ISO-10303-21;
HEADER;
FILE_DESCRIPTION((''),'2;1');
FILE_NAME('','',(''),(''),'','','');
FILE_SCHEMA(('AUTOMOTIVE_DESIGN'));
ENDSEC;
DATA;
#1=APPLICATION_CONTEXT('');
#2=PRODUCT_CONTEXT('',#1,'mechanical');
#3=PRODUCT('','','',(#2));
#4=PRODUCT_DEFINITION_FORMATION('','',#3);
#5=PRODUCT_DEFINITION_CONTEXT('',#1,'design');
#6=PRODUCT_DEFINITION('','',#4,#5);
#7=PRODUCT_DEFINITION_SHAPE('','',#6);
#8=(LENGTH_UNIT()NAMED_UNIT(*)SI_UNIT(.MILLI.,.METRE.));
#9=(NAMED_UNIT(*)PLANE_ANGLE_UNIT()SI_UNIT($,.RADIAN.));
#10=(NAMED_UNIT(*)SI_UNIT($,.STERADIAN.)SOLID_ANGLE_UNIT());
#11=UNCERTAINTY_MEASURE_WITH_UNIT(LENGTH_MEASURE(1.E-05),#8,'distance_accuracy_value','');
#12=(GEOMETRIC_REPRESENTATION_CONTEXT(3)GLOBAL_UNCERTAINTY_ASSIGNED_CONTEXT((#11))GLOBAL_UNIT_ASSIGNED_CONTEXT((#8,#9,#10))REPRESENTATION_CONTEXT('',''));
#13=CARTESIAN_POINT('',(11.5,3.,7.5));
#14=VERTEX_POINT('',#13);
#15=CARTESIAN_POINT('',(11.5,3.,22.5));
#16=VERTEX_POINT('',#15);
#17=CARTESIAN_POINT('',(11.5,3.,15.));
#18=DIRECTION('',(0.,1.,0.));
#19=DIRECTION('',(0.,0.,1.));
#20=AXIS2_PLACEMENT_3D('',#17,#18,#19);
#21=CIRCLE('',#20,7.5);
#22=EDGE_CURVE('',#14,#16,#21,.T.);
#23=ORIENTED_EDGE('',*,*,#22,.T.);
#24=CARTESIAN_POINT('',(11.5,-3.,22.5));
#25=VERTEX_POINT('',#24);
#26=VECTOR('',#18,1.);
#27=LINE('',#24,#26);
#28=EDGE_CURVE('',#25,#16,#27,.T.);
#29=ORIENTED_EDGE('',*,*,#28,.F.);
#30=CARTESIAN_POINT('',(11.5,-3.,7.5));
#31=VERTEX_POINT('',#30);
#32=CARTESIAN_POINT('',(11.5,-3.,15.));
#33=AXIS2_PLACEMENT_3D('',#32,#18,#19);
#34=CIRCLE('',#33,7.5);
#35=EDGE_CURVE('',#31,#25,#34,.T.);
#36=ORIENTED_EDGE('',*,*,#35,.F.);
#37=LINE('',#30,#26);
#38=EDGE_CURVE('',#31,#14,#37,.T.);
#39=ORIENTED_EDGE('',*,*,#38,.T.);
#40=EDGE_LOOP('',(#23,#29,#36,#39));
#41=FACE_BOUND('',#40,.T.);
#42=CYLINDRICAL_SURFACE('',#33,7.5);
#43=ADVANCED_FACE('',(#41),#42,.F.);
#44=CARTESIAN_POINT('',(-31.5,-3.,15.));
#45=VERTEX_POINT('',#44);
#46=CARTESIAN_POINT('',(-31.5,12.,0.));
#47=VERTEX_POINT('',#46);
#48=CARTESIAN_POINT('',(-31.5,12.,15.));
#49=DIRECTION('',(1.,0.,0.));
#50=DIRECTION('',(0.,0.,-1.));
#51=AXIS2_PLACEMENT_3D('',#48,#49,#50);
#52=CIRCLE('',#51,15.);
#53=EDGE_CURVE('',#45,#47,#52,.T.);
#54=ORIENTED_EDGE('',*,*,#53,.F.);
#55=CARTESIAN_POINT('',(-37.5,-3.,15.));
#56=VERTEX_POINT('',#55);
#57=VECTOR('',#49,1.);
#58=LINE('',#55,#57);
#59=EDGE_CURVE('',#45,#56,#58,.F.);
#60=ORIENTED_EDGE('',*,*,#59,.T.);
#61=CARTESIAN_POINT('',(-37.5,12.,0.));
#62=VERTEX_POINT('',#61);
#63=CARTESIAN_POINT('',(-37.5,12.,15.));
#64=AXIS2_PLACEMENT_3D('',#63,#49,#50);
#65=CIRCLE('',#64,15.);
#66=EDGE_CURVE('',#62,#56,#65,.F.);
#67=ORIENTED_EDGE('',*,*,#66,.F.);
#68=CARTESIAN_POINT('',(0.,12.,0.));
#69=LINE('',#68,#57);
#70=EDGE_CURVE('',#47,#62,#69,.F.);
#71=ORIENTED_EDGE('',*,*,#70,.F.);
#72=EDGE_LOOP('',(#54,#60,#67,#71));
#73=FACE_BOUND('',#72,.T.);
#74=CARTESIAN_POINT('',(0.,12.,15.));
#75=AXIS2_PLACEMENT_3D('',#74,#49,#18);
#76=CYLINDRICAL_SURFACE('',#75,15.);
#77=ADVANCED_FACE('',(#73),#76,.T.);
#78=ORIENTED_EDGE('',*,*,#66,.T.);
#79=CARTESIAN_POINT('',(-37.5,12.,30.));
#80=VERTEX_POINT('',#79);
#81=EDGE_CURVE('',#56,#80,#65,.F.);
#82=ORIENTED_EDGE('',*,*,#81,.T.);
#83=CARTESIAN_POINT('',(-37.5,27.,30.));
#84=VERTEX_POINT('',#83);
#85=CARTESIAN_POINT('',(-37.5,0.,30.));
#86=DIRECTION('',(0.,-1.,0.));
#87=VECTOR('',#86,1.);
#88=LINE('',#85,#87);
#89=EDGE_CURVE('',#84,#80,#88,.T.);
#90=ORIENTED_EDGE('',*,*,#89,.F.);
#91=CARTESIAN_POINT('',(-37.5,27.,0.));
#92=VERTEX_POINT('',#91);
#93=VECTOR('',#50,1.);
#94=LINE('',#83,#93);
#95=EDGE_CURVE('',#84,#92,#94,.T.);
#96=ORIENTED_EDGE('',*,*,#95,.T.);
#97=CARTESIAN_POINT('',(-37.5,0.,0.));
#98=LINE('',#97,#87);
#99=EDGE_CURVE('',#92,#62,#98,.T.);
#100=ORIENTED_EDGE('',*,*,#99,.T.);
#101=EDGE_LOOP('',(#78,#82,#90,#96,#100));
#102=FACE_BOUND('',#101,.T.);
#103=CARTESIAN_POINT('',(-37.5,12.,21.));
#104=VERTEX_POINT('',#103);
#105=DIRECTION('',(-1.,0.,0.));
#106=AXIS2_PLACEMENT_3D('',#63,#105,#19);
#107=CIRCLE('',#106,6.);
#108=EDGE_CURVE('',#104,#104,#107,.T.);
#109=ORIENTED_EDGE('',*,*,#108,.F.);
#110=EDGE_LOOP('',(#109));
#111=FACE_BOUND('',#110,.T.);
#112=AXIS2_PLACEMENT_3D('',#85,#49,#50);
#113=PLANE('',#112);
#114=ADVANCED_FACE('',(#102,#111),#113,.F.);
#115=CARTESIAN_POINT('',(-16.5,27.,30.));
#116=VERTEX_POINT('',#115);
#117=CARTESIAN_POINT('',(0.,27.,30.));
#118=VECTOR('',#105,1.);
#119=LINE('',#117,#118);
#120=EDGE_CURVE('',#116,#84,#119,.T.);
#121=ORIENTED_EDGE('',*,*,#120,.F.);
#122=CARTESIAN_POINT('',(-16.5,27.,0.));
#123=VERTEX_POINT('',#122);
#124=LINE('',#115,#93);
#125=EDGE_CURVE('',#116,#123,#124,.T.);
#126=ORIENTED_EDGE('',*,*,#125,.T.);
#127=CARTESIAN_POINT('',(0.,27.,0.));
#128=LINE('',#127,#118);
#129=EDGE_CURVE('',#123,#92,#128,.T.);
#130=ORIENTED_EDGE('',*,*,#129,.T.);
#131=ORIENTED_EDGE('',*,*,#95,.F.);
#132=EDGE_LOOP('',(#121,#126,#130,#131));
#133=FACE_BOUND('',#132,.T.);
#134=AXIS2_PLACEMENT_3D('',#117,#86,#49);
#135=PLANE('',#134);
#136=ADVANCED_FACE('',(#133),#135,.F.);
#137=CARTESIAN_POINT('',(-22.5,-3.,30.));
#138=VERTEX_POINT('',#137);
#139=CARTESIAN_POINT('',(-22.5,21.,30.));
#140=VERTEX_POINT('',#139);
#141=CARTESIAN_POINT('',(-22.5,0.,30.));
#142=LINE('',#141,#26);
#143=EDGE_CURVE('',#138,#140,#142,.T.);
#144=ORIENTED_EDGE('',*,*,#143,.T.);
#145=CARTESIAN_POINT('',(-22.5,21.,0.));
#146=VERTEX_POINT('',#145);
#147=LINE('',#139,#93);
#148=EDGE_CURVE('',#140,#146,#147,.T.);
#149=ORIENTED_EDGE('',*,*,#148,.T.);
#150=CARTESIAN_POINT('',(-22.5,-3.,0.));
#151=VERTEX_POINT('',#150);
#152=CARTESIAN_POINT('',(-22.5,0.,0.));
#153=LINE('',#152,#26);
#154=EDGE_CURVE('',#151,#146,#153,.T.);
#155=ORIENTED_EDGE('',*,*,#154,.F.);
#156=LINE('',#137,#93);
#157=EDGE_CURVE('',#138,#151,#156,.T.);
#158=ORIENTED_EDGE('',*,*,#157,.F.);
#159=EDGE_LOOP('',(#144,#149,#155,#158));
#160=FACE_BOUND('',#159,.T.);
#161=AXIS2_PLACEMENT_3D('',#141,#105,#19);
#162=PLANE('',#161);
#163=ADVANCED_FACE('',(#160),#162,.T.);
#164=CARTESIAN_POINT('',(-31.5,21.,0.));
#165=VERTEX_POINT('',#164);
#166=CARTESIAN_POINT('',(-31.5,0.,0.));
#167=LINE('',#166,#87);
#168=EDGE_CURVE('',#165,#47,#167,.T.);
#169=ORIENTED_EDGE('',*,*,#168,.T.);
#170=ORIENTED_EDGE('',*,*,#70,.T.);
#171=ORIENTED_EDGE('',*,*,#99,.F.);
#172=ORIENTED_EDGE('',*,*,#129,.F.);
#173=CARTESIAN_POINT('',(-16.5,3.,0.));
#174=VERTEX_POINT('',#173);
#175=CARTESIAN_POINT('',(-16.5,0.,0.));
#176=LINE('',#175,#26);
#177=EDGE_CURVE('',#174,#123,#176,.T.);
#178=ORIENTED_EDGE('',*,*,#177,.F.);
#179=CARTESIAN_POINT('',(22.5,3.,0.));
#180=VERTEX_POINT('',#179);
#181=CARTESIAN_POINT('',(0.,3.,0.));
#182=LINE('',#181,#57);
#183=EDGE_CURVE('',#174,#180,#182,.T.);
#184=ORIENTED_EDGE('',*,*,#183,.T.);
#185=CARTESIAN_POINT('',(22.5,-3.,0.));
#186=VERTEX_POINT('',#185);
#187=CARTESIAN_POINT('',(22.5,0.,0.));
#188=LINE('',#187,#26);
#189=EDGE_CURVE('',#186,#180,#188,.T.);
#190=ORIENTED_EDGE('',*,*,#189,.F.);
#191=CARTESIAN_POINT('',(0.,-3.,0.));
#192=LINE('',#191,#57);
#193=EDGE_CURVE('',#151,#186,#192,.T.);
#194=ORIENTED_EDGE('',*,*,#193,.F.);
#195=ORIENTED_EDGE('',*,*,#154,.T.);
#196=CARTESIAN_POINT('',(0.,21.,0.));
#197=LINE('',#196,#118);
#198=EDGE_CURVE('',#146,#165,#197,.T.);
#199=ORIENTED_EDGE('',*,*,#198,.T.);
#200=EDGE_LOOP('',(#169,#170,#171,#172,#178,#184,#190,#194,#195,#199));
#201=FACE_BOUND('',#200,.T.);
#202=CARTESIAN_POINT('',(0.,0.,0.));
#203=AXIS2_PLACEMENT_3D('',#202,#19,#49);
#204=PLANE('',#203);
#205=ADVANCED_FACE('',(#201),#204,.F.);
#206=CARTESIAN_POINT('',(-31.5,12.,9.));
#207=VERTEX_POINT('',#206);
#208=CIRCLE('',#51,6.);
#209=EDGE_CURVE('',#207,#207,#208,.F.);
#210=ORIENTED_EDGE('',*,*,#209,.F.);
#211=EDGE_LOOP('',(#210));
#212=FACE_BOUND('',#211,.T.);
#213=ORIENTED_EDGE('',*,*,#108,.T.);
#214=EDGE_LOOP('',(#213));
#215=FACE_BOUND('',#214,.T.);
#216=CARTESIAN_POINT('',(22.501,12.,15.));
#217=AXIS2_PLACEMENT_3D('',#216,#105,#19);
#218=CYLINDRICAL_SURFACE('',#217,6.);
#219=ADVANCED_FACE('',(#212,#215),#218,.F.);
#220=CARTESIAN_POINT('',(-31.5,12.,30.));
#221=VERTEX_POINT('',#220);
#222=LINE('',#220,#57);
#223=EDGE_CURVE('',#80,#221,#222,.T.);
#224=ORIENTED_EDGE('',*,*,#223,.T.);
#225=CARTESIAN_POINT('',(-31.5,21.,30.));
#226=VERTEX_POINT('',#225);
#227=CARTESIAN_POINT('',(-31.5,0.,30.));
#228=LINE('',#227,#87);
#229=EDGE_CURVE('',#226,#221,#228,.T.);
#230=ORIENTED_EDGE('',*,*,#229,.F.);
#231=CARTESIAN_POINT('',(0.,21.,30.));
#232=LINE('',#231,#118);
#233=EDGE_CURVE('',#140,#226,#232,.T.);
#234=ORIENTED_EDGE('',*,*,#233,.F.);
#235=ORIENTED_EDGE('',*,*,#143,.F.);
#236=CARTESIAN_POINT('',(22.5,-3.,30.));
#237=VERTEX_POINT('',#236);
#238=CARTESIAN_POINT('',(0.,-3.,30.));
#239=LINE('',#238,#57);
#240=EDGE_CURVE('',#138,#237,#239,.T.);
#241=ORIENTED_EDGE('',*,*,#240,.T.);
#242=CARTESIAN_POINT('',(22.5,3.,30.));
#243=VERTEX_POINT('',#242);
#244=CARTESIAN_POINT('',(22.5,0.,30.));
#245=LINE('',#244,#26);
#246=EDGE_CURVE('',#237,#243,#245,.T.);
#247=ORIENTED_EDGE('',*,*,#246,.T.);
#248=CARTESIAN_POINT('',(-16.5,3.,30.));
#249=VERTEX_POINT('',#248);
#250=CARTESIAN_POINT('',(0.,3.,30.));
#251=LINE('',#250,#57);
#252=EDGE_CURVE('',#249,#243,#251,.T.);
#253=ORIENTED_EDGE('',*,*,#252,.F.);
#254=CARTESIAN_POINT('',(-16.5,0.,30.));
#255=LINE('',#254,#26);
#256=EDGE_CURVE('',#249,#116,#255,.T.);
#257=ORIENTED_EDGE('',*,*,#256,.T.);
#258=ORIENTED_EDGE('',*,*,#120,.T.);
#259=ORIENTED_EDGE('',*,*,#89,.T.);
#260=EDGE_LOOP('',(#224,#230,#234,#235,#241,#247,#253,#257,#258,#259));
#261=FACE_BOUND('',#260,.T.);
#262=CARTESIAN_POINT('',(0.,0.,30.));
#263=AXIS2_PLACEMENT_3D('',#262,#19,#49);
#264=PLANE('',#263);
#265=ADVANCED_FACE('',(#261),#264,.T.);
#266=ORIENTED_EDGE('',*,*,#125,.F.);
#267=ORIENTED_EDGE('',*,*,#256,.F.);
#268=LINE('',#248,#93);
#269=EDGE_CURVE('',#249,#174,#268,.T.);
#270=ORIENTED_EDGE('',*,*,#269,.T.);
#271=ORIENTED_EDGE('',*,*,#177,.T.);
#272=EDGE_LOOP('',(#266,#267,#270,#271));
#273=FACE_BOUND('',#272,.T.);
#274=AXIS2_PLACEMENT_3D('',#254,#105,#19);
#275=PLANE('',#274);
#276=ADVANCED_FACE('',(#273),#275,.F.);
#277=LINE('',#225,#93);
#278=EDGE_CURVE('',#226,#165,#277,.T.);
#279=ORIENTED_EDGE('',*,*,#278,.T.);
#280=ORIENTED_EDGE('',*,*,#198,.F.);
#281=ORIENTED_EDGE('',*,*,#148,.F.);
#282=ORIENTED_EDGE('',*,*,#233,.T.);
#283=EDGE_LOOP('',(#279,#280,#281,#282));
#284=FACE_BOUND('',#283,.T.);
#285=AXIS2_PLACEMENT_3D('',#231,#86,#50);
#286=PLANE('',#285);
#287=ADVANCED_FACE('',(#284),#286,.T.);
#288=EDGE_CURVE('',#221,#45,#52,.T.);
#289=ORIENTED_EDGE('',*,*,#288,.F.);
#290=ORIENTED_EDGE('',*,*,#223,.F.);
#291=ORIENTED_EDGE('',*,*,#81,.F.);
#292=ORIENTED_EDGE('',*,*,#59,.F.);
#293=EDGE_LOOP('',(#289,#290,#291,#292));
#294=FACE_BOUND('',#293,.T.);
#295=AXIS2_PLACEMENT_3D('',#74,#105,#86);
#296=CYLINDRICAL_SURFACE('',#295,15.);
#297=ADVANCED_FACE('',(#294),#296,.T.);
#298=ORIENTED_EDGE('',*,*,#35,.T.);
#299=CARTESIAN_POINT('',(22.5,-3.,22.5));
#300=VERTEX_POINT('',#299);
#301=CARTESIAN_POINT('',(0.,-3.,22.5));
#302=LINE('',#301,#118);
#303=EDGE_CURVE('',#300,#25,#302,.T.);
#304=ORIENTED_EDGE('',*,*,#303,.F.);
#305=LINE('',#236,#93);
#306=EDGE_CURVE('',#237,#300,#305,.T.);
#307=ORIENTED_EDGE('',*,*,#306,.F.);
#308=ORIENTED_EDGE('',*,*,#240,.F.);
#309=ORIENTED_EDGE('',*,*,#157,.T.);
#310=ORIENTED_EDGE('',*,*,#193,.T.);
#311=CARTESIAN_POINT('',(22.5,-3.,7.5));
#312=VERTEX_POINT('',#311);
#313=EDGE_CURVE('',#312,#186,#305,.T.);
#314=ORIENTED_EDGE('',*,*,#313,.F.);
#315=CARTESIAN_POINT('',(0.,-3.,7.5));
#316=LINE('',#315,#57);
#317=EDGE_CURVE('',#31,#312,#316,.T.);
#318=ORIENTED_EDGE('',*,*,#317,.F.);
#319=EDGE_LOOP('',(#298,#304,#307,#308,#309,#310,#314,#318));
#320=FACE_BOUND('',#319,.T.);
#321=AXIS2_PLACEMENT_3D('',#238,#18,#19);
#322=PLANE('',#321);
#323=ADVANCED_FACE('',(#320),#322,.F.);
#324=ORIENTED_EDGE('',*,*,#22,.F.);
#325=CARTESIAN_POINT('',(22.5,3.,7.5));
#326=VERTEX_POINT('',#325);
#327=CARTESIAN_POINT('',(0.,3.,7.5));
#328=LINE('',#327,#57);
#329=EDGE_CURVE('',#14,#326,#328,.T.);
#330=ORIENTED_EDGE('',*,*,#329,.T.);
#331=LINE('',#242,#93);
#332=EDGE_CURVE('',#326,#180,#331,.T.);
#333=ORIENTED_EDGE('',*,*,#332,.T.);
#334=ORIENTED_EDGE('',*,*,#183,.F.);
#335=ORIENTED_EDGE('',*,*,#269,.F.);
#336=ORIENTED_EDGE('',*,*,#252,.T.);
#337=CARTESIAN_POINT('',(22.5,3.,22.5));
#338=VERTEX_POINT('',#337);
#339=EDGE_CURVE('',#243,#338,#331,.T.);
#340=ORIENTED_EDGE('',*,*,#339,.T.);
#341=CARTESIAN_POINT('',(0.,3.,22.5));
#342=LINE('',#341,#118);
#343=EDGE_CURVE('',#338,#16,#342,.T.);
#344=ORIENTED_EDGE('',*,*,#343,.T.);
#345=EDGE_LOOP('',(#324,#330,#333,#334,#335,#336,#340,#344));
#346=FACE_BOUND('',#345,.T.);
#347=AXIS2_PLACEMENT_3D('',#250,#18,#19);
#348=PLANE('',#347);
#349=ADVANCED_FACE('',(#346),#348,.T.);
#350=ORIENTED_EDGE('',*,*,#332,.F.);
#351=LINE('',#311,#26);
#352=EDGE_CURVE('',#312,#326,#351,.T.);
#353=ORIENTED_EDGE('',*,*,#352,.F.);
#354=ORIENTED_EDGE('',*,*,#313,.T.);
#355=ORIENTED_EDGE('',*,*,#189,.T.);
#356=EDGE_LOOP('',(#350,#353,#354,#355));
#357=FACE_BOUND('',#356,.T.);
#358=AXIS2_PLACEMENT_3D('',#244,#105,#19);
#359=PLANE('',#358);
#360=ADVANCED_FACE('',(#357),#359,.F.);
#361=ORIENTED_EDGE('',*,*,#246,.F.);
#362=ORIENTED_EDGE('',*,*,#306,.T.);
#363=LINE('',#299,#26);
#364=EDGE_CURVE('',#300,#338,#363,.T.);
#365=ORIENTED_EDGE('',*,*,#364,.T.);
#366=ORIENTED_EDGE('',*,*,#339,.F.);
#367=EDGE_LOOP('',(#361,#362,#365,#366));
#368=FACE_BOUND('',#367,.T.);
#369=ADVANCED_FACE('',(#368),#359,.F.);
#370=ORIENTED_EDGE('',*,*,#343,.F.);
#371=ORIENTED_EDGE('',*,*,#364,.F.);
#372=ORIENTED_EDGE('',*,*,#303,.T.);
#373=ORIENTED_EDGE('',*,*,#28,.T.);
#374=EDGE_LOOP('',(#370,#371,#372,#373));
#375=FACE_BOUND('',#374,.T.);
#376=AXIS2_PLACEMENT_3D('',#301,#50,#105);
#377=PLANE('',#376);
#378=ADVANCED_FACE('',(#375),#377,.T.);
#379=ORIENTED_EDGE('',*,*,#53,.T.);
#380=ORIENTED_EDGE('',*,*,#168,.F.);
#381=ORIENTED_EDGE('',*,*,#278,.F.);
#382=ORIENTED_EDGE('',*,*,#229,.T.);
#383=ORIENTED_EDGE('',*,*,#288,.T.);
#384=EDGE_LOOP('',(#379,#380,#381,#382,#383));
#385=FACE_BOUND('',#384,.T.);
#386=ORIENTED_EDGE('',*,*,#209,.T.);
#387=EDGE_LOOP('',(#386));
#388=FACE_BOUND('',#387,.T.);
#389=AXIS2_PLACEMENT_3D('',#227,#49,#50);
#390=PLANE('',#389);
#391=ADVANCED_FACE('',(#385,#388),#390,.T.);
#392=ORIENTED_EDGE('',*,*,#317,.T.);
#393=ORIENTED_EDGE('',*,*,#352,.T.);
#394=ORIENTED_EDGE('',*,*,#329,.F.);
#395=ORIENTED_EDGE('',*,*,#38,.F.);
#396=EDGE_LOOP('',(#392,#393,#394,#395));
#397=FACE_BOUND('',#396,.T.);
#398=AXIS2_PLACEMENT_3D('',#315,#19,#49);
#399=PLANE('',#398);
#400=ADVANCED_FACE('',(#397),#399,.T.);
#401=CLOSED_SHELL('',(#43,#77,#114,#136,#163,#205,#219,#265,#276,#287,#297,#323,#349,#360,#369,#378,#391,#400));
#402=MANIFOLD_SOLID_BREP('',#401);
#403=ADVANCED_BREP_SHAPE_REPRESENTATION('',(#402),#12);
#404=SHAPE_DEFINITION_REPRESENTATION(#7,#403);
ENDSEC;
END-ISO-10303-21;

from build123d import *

# Parameters (mm, degrees)
SKETCH_1_W          = 6
SKETCH_1_H          = 24
SKETCH_1_W_2        = 45
SKETCH_1_H_2        = 6
EXTRUDE_1_DEPTH     = 30
FILLET_1_R          = 15
CUT_EXTRUDE_1_REACH = 74.312
SKETCH_2_R          = 6
CUT_EXTRUDE_2_DEPTH = 54.686590505


with BuildPart() as part:
    # Эскиз1 → Бобышка-Вытянуть1 (new body)
    with BuildSketch(Plane.XY):
        with Locations((-34.5, 9)):
            Rectangle(SKETCH_1_W, SKETCH_1_H)
        Polygon((-31.5, 21), (-22.5, 21), (-22.5, 27), (-37.5, 27), (-37.5, 21), align=None)
        Polygon((-22.5, 21), (-22.5, 3), (-16.5, 3), (-16.5, 27), (-22.5, 27), align=None)
        Rectangle(SKETCH_1_W_2, SKETCH_1_H_2)
    extrude(amount=EXTRUDE_1_DEPTH)

    # Скругление1
    fillet_1_edges = [part.edges().sort_by_distance(p)[0] for p in [
        (-34.5, -3, 0),
        (-34.5, -3, 30),
    ]]
    fillet(fillet_1_edges, radius=FILLET_1_R - 0.0001)  # a hair under: the kernel refuses the full size

    # Эскиз2 → Вырез-Вытянуть1 (cut, up to next)
    with BuildSketch(Plane.ZY.offset(37.5), mode=Mode.PRIVATE) as cut_extrude_1_sk1:
        with Locations((15, 12)):
            Circle(SKETCH_2_R)
    cut_extrude_1_tool1 = extrude(cut_extrude_1_sk1.sketch, amount=-CUT_EXTRUDE_1_REACH, mode=Mode.PRIVATE) & part.part
    add(cut_extrude_1_tool1.solids().sort_by_distance((-37.5, 12, 15))[0], mode=Mode.SUBTRACT)

    # Эскиз3 → Вырез-Вытянуть2 (cut, through all)
    with BuildSketch(Plane(origin=(0, 3, 0), x_dir=(1, 0, 0), z_dir=(0, 1, 0))):
        with BuildLine():
            Line((22.5, -7.5), (11.5, -7.5))
            ThreePointArc((11.5, -7.5), (4, -15), (11.5, -22.5))
            Line((11.5, -22.5), (22.5, -22.5))
            Line((22.5, -22.5), (22.5, -7.5))
        make_face()
    extrude(amount=-CUT_EXTRUDE_2_DEPTH, mode=Mode.SUBTRACT)


solid = part.part
